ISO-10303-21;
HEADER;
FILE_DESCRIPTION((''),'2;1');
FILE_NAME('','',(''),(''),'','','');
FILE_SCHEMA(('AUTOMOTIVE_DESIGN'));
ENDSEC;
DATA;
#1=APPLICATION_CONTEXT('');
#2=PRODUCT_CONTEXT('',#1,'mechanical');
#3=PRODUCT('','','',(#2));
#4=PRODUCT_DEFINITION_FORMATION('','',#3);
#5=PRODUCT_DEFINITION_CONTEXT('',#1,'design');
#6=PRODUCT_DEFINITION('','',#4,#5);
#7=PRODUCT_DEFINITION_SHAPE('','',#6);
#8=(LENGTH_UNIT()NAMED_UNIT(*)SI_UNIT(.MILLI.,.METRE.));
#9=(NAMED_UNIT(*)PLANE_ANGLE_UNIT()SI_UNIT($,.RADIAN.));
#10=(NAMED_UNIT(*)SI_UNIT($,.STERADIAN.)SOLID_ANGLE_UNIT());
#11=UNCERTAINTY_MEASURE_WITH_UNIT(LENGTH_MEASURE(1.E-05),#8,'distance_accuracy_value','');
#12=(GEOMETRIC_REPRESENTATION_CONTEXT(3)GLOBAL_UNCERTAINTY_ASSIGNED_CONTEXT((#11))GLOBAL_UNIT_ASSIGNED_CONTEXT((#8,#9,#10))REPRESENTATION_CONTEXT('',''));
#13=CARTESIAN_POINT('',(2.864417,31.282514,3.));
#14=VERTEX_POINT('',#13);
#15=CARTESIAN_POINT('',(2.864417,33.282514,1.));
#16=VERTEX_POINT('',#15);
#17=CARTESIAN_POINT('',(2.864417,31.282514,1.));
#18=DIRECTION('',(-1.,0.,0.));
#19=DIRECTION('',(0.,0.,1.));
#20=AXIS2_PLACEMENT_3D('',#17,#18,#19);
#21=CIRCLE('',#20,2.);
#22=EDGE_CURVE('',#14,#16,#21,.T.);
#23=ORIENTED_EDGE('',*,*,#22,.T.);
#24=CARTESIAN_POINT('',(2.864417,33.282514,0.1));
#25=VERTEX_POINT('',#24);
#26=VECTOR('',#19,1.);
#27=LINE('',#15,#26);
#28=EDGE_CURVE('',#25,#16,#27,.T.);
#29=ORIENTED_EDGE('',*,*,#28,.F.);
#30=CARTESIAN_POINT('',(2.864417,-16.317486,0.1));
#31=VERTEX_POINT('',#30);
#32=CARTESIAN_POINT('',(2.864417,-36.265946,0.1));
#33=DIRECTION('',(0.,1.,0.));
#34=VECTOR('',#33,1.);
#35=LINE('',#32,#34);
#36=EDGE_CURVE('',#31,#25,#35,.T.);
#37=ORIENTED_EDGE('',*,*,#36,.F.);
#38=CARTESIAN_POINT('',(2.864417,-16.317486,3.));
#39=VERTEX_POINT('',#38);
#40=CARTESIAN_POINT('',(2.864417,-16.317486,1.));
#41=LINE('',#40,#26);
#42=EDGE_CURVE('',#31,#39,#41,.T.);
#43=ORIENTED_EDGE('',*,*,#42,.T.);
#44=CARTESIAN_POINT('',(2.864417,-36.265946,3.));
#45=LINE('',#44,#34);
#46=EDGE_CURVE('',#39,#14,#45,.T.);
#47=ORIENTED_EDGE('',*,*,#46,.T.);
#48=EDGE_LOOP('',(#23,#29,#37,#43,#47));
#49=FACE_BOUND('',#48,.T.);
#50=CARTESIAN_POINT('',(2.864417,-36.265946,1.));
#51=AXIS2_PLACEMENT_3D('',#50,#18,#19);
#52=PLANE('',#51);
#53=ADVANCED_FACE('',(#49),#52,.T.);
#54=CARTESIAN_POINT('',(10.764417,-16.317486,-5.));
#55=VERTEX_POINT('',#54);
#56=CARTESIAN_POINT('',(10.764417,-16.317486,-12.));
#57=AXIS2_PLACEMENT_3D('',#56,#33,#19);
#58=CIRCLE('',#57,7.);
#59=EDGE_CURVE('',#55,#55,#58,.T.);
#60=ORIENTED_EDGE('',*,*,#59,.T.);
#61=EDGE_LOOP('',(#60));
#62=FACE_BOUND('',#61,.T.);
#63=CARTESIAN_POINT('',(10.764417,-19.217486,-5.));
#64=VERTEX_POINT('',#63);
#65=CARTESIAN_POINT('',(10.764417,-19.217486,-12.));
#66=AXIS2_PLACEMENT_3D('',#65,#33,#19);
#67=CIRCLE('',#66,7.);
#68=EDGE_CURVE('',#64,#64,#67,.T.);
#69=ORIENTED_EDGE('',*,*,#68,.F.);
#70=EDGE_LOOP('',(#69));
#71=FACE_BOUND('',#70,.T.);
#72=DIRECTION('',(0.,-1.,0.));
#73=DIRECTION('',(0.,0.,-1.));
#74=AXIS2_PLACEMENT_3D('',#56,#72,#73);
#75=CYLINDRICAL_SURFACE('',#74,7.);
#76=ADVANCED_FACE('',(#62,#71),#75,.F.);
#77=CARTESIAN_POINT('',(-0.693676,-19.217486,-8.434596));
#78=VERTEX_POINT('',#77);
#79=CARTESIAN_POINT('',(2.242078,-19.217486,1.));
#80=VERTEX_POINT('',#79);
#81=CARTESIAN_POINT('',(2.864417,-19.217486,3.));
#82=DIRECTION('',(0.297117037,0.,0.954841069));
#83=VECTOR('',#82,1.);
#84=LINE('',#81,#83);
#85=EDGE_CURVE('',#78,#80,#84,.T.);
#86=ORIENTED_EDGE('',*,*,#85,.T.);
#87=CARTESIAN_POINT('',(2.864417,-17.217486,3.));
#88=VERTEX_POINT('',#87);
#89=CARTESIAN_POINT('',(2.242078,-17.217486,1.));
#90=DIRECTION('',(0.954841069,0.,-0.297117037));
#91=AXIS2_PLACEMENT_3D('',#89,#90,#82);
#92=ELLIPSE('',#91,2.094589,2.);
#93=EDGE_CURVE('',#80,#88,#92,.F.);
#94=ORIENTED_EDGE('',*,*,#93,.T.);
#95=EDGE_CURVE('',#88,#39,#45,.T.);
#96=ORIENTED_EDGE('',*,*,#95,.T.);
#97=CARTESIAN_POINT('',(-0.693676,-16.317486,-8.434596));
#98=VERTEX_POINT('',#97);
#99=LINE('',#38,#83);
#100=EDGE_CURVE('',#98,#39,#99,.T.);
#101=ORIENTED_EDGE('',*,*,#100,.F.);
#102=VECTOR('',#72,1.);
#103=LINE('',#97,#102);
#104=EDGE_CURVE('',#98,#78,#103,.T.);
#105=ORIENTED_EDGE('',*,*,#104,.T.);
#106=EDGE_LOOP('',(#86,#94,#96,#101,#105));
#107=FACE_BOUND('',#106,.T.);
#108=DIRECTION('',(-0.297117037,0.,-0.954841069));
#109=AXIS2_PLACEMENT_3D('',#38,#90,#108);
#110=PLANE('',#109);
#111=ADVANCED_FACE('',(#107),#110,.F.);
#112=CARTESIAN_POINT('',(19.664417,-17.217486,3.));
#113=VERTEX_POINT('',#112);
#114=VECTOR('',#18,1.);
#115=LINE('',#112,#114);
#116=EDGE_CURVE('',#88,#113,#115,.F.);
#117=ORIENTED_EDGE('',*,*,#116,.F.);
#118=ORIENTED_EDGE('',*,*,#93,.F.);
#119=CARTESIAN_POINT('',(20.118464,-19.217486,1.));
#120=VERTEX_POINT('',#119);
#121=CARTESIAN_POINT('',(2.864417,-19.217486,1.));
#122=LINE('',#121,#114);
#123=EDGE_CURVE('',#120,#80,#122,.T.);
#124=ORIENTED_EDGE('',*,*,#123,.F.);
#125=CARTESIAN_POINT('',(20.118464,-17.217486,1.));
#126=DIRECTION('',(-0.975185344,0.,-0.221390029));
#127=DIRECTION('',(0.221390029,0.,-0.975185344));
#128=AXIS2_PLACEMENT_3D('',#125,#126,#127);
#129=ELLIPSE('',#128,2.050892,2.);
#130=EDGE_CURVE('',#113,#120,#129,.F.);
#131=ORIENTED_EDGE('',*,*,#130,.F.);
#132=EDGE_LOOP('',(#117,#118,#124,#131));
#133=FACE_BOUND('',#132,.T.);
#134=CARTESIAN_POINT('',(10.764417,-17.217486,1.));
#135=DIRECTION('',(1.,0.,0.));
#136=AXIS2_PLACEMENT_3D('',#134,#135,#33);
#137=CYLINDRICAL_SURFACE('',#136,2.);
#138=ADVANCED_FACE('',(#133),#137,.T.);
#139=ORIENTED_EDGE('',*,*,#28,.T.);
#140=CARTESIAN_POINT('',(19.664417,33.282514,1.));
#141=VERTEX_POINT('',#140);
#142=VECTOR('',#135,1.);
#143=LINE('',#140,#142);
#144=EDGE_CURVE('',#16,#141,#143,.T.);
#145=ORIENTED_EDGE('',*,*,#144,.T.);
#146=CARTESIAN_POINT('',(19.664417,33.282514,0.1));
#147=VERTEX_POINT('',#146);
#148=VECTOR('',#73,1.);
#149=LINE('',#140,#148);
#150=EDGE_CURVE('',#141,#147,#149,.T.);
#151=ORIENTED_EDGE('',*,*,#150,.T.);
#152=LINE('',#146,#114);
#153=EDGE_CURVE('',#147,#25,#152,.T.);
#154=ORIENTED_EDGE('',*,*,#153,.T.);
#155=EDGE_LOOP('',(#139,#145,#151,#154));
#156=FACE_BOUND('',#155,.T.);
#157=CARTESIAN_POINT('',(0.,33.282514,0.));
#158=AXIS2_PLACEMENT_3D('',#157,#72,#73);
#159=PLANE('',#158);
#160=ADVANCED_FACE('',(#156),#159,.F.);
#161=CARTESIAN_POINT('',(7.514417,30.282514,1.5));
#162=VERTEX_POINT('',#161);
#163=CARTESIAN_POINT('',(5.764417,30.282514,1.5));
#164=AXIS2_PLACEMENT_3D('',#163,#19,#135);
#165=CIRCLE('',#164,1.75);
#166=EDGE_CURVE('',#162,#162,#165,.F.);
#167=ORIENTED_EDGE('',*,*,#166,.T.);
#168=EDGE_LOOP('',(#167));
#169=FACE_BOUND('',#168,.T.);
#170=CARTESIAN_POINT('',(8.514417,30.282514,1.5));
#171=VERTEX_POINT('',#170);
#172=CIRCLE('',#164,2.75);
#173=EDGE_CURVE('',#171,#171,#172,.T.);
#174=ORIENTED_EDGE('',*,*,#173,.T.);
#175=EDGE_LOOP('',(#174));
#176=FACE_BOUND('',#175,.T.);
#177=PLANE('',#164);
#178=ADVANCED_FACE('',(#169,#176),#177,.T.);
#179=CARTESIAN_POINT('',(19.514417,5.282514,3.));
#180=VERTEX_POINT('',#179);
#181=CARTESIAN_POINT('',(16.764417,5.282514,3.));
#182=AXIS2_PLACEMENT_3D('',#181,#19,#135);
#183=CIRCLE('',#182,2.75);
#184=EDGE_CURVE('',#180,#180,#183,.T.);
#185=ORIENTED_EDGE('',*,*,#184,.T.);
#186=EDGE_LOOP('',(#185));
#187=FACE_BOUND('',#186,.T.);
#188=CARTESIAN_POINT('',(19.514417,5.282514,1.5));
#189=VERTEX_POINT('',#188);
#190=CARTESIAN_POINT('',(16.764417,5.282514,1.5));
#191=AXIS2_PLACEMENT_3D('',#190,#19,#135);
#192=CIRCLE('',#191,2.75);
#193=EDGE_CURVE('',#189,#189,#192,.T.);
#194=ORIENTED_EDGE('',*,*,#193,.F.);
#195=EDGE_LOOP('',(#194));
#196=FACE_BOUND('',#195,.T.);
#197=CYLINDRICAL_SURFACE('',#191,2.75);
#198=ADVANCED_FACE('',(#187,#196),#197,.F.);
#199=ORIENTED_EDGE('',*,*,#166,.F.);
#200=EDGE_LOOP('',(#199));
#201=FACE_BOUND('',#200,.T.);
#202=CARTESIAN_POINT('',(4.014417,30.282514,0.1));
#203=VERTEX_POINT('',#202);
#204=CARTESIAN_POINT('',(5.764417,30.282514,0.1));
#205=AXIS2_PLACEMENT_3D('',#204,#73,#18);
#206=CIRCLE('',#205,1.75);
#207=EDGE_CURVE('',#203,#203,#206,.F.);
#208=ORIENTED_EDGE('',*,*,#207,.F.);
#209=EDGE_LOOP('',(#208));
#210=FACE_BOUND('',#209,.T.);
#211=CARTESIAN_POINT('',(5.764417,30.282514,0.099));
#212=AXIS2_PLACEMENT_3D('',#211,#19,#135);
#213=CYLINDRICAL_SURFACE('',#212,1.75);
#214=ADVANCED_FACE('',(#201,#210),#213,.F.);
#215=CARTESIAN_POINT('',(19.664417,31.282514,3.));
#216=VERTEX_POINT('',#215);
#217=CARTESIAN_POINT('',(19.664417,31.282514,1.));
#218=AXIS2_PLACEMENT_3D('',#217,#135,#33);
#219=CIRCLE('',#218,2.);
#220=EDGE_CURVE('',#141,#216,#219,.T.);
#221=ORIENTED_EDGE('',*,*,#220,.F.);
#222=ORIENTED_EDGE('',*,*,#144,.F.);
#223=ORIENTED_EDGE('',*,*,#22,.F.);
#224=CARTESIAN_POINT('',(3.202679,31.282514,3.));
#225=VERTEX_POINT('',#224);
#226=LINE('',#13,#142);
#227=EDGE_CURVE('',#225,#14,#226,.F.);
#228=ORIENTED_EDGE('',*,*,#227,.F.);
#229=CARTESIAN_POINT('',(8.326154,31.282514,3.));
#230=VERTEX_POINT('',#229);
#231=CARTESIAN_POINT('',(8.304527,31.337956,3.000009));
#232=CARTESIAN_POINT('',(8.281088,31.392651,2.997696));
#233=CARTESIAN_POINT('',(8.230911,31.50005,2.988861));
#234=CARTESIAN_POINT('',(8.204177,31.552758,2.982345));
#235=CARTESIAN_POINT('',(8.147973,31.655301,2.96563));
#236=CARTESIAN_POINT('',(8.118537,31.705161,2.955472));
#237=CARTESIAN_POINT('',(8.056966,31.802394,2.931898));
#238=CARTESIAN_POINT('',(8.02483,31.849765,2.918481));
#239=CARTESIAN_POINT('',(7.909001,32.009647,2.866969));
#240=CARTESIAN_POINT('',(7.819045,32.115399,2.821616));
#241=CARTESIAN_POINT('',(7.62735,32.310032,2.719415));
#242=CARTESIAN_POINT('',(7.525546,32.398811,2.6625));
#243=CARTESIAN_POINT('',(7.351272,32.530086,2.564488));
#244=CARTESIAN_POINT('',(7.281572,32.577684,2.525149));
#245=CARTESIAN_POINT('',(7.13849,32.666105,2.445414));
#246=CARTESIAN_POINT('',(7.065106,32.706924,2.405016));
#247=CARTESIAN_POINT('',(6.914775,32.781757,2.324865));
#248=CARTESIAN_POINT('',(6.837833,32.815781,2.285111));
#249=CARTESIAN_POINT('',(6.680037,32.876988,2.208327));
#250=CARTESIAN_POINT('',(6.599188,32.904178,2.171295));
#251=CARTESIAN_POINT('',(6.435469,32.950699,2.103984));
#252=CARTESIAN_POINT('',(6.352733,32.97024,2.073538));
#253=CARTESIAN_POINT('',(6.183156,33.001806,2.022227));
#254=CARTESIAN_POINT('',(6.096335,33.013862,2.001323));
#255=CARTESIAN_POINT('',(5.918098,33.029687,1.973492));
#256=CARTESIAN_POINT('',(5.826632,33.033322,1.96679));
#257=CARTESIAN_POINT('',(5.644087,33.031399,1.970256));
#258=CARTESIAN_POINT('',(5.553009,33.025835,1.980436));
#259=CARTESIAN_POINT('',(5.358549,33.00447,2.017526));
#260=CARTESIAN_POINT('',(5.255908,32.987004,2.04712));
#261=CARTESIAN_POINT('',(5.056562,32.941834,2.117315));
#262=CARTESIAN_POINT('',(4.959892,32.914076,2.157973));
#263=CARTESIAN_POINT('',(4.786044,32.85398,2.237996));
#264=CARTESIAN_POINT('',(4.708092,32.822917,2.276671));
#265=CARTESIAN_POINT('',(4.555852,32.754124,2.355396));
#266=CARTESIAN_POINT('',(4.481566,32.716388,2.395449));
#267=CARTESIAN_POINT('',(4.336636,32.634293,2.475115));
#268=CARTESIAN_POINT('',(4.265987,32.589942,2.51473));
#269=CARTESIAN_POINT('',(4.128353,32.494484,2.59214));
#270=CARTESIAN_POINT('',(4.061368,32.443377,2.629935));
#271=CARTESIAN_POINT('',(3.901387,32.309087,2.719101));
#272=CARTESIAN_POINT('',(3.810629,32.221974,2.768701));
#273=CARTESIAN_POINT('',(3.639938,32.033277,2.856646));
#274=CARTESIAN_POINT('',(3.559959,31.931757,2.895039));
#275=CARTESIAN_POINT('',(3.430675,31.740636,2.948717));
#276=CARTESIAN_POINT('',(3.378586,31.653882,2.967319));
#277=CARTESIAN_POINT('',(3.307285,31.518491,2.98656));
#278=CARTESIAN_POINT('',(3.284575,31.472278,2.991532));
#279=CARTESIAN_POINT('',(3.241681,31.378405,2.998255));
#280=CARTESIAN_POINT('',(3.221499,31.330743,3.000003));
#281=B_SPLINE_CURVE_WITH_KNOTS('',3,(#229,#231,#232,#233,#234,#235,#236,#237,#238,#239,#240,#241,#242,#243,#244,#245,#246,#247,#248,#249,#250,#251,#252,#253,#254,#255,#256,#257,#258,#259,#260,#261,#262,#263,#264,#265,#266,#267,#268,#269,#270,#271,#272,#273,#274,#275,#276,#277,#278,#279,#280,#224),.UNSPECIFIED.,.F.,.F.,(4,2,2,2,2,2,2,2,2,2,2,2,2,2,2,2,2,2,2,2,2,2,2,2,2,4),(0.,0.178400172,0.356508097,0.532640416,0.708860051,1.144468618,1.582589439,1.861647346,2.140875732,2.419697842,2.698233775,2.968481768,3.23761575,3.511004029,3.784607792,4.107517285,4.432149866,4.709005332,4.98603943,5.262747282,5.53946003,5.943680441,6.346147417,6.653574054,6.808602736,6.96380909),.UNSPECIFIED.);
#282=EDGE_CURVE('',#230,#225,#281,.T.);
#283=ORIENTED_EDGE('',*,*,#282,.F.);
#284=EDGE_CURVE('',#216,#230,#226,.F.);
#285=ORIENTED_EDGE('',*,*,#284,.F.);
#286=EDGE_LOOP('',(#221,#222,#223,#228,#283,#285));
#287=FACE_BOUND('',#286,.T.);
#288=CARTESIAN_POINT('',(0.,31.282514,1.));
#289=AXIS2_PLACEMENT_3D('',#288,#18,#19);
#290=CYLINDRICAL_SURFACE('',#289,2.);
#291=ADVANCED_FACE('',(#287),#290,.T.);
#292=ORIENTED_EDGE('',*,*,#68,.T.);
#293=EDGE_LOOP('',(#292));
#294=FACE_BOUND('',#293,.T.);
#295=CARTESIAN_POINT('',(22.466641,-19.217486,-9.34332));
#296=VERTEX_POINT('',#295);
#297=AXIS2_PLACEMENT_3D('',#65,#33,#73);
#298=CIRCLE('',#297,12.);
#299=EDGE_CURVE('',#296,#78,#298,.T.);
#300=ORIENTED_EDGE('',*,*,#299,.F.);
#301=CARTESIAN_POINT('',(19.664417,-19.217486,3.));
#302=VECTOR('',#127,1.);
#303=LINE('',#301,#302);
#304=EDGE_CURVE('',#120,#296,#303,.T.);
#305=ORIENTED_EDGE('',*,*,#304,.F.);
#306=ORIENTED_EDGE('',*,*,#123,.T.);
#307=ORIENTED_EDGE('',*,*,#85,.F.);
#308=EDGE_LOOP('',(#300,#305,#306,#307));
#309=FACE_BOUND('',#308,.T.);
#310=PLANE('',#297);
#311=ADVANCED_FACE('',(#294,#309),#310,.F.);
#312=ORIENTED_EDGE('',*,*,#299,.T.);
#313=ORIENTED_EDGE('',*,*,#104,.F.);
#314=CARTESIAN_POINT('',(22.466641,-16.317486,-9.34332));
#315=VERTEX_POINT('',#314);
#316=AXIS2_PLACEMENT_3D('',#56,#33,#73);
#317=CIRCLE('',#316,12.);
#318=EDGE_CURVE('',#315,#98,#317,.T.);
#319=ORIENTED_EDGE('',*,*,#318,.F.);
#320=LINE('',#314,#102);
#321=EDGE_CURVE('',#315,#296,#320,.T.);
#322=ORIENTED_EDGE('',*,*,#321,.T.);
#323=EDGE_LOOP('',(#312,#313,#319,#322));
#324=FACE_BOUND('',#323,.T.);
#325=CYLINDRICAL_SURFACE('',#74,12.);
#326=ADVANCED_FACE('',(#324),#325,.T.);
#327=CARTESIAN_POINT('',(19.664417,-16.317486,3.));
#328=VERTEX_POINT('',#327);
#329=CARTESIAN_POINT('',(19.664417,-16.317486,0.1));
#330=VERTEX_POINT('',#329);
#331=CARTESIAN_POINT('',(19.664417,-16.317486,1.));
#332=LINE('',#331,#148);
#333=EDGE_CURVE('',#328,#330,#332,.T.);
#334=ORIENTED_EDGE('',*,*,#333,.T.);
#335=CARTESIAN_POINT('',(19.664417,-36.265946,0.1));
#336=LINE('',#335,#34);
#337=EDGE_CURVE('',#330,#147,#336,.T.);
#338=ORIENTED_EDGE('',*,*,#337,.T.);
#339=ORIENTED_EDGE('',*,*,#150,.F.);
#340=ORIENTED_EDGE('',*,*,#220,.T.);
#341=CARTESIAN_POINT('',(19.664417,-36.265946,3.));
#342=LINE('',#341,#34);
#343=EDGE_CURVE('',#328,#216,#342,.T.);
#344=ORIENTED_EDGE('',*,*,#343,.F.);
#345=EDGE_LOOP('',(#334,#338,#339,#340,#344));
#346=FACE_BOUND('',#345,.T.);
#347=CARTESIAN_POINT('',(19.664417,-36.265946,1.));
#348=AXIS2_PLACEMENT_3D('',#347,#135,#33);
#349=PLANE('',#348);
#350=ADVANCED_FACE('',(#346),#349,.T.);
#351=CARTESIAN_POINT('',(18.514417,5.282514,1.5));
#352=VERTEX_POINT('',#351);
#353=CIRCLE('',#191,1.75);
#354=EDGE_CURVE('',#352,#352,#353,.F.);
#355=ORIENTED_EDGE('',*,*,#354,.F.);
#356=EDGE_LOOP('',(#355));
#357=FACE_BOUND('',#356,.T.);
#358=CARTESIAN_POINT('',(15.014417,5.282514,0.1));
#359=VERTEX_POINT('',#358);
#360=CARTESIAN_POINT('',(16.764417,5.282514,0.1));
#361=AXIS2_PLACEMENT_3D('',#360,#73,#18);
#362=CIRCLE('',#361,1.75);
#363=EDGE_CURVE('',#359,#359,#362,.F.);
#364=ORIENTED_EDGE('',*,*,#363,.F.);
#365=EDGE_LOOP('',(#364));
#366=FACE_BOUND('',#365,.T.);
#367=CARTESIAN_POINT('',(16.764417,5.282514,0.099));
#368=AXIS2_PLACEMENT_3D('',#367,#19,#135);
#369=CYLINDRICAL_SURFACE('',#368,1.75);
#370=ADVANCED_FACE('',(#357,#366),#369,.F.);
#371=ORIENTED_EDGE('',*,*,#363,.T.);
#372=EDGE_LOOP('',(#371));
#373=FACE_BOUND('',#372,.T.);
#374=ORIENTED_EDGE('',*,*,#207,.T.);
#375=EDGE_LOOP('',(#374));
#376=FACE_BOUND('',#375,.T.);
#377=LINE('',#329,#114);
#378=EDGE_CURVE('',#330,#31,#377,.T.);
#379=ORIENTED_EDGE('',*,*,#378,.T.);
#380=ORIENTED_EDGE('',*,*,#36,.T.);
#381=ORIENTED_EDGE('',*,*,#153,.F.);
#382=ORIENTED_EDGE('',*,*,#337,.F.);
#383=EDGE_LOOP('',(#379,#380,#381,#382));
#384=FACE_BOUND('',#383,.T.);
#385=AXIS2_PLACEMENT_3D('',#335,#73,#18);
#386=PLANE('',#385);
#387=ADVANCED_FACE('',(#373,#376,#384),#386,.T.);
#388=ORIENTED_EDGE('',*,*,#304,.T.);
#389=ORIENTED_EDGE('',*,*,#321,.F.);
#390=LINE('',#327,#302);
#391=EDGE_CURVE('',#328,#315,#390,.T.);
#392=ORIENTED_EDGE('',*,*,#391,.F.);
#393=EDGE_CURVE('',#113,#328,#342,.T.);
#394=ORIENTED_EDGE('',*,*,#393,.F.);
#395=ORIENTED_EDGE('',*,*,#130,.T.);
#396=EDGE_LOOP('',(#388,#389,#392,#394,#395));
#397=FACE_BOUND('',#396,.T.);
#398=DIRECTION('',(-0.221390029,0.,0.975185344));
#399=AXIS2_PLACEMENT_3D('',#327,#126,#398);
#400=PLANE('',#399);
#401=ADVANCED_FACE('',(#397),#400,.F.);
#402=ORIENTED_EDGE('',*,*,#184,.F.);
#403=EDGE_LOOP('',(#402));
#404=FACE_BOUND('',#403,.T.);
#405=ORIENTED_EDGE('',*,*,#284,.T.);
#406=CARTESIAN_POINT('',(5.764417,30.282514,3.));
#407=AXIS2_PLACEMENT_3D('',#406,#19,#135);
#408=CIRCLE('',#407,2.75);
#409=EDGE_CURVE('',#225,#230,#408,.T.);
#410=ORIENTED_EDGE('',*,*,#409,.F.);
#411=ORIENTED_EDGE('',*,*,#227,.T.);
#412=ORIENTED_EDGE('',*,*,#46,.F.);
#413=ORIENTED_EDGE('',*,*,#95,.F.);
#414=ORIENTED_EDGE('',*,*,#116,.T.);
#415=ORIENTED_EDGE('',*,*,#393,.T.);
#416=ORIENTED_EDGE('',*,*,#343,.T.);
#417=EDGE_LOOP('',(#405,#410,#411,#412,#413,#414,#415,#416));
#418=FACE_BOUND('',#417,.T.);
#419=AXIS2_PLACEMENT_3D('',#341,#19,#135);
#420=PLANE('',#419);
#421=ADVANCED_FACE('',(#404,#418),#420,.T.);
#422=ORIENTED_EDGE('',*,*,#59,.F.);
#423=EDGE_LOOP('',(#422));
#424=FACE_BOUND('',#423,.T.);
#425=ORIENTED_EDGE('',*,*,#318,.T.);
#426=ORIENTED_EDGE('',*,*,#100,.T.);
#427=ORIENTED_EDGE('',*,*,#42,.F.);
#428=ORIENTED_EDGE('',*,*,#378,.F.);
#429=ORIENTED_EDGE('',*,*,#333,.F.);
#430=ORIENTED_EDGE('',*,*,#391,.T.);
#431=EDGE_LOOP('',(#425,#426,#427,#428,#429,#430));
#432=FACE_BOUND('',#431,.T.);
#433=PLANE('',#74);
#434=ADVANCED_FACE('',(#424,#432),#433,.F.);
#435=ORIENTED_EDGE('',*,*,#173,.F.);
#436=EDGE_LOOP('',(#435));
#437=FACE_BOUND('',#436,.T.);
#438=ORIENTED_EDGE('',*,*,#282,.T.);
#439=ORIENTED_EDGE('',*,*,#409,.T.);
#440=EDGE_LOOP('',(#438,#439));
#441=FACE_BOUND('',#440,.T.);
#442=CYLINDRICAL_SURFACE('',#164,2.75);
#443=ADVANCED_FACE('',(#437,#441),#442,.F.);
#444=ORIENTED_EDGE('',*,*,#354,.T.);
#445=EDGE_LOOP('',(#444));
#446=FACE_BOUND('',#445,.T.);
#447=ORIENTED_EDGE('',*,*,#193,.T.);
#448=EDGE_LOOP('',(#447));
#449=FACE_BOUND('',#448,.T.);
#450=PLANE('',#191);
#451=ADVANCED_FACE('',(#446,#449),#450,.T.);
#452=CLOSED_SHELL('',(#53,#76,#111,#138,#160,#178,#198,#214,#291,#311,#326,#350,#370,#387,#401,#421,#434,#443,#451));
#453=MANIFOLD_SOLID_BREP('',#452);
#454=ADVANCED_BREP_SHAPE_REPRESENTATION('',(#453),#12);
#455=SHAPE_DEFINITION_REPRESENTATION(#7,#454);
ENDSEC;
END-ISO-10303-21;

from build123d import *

# Parameters (mm, degrees)
SALIENTE_EXTRUIR1_DEPTH = 52.5
CORTAR_EXTRUIR3_REACH   = 40.766
CROQUIS3_R              = 1.75
CROQUIS4_R              = 2.75
CORTAR_EXTRUIR4_DEPTH   = 1.5
CROQUIS5_R              = 7
SALIENTE_EXTRUIR2_DEPTH = 2.9
REDONDEO1_R             = 2


with BuildPart() as part:
    # Croquis2 → Saliente-Extruir1 (new body)
    with BuildSketch(Plane(origin=(0, 33.282514016, 0), x_dir=(1, 0, 0), z_dir=(0, 1, 0))):
        Polygon((19.664416593, -1), (19.664416593, -0.1), (2.864416593, -0.1), (2.864416593, -1), (2.864416593, -3), (19.664416593, -3), align=None)
    extrude(amount=-SALIENTE_EXTRUIR1_DEPTH)

    # Croquis3 → Cortar-Extruir3 (cut, up to next)
    with BuildSketch(Plane.XY.offset(3), mode=Mode.PRIVATE) as cortar_extruir3_sk1:
        with Locations((5.764416593, 30.282514016)):
            Circle(CROQUIS3_R)
    cortar_extruir3_tool1 = extrude(cortar_extruir3_sk1.sketch, amount=-CORTAR_EXTRUIR3_REACH, mode=Mode.PRIVATE) & part.part
    # Croquis3 → Cortar-Extruir3 (cut, up to next)
    with BuildSketch(Plane.XY.offset(3), mode=Mode.PRIVATE) as cortar_extruir3_sk2:
        with Locations((16.764416593, 5.282514016)):
            Circle(CROQUIS3_R)
    cortar_extruir3_tool2 = extrude(cortar_extruir3_sk2.sketch, amount=-CORTAR_EXTRUIR3_REACH, mode=Mode.PRIVATE) & part.part
    add(cortar_extruir3_tool1.solids().sort_by_distance((5.764417, 30.282514, 3))[0], mode=Mode.SUBTRACT)
    add(cortar_extruir3_tool2.solids().sort_by_distance((16.764417, 5.282514, 3))[0], mode=Mode.SUBTRACT)

    # Croquis4 → Cortar-Extruir4 (cut)
    with BuildSketch(Plane.XY.offset(3)):
        with Locations((5.764416593, 30.282514016)):
            Circle(CROQUIS4_R)
        with Locations((16.764416593, 5.282514016)):
            Circle(CROQUIS4_R)
    extrude(amount=-CORTAR_EXTRUIR4_DEPTH, mode=Mode.SUBTRACT)

    # Croquis5 → Saliente-Extruir2 (add)
    with BuildSketch(Plane(origin=(0, -19.217485984, 0), x_dir=(1, 0, 0), z_dir=(0, 1, 0))):
        with BuildLine():
            Line((2.864416593, -3), (19.664416593, -3))
            Line((19.664416593, -3), (22.46664072, 9.343319648))
            ThreePointArc((22.46664072, 9.343319648), (10.29394354, 23.990773749), (-0.693676229, 8.434595553))
            Line((-0.693676229, 8.434595553), (2.864416593, -3))
        make_face()
        with Locations(Location((10.764416593, 12, 0), (0, 0, 270))):
            Circle(CROQUIS5_R, mode=Mode.SUBTRACT)
    extrude(amount=SALIENTE_EXTRUIR2_DEPTH)

    # Redondeo1
    # the kernel refuses this fillet: 2 mm, written as the material it takes off along each edge
    with BuildSketch(Plane(origin=(-2.135583407, -19.217485984, 3), x_dir=(0, 1, 0), z_dir=(1, 0, 0))) as redondeo1_piece_1:
        with BuildLine():
            CenterArc((REDONDEO1_R, -REDONDEO1_R), REDONDEO1_R, 90, 90)
            Line((0, -REDONDEO1_R), (0, 0))
            Line((0, 0), (REDONDEO1_R, 0))
        make_face()
    extrude(amount=26.8, mode=Mode.SUBTRACT)
    with BuildSketch(Plane(origin=(-2.135583407, 33.282514016, 3), x_dir=(0, -1, 0), z_dir=(1, 0, 0))) as redondeo1_piece_2:
        with BuildLine():
            CenterArc((REDONDEO1_R, REDONDEO1_R), REDONDEO1_R, 180, 90)
            Line((0, REDONDEO1_R), (0, 0))
            Line((0, 0), (REDONDEO1_R, 0))
        make_face()
    extrude(amount=26.8, mode=Mode.SUBTRACT)


solid = part.part
